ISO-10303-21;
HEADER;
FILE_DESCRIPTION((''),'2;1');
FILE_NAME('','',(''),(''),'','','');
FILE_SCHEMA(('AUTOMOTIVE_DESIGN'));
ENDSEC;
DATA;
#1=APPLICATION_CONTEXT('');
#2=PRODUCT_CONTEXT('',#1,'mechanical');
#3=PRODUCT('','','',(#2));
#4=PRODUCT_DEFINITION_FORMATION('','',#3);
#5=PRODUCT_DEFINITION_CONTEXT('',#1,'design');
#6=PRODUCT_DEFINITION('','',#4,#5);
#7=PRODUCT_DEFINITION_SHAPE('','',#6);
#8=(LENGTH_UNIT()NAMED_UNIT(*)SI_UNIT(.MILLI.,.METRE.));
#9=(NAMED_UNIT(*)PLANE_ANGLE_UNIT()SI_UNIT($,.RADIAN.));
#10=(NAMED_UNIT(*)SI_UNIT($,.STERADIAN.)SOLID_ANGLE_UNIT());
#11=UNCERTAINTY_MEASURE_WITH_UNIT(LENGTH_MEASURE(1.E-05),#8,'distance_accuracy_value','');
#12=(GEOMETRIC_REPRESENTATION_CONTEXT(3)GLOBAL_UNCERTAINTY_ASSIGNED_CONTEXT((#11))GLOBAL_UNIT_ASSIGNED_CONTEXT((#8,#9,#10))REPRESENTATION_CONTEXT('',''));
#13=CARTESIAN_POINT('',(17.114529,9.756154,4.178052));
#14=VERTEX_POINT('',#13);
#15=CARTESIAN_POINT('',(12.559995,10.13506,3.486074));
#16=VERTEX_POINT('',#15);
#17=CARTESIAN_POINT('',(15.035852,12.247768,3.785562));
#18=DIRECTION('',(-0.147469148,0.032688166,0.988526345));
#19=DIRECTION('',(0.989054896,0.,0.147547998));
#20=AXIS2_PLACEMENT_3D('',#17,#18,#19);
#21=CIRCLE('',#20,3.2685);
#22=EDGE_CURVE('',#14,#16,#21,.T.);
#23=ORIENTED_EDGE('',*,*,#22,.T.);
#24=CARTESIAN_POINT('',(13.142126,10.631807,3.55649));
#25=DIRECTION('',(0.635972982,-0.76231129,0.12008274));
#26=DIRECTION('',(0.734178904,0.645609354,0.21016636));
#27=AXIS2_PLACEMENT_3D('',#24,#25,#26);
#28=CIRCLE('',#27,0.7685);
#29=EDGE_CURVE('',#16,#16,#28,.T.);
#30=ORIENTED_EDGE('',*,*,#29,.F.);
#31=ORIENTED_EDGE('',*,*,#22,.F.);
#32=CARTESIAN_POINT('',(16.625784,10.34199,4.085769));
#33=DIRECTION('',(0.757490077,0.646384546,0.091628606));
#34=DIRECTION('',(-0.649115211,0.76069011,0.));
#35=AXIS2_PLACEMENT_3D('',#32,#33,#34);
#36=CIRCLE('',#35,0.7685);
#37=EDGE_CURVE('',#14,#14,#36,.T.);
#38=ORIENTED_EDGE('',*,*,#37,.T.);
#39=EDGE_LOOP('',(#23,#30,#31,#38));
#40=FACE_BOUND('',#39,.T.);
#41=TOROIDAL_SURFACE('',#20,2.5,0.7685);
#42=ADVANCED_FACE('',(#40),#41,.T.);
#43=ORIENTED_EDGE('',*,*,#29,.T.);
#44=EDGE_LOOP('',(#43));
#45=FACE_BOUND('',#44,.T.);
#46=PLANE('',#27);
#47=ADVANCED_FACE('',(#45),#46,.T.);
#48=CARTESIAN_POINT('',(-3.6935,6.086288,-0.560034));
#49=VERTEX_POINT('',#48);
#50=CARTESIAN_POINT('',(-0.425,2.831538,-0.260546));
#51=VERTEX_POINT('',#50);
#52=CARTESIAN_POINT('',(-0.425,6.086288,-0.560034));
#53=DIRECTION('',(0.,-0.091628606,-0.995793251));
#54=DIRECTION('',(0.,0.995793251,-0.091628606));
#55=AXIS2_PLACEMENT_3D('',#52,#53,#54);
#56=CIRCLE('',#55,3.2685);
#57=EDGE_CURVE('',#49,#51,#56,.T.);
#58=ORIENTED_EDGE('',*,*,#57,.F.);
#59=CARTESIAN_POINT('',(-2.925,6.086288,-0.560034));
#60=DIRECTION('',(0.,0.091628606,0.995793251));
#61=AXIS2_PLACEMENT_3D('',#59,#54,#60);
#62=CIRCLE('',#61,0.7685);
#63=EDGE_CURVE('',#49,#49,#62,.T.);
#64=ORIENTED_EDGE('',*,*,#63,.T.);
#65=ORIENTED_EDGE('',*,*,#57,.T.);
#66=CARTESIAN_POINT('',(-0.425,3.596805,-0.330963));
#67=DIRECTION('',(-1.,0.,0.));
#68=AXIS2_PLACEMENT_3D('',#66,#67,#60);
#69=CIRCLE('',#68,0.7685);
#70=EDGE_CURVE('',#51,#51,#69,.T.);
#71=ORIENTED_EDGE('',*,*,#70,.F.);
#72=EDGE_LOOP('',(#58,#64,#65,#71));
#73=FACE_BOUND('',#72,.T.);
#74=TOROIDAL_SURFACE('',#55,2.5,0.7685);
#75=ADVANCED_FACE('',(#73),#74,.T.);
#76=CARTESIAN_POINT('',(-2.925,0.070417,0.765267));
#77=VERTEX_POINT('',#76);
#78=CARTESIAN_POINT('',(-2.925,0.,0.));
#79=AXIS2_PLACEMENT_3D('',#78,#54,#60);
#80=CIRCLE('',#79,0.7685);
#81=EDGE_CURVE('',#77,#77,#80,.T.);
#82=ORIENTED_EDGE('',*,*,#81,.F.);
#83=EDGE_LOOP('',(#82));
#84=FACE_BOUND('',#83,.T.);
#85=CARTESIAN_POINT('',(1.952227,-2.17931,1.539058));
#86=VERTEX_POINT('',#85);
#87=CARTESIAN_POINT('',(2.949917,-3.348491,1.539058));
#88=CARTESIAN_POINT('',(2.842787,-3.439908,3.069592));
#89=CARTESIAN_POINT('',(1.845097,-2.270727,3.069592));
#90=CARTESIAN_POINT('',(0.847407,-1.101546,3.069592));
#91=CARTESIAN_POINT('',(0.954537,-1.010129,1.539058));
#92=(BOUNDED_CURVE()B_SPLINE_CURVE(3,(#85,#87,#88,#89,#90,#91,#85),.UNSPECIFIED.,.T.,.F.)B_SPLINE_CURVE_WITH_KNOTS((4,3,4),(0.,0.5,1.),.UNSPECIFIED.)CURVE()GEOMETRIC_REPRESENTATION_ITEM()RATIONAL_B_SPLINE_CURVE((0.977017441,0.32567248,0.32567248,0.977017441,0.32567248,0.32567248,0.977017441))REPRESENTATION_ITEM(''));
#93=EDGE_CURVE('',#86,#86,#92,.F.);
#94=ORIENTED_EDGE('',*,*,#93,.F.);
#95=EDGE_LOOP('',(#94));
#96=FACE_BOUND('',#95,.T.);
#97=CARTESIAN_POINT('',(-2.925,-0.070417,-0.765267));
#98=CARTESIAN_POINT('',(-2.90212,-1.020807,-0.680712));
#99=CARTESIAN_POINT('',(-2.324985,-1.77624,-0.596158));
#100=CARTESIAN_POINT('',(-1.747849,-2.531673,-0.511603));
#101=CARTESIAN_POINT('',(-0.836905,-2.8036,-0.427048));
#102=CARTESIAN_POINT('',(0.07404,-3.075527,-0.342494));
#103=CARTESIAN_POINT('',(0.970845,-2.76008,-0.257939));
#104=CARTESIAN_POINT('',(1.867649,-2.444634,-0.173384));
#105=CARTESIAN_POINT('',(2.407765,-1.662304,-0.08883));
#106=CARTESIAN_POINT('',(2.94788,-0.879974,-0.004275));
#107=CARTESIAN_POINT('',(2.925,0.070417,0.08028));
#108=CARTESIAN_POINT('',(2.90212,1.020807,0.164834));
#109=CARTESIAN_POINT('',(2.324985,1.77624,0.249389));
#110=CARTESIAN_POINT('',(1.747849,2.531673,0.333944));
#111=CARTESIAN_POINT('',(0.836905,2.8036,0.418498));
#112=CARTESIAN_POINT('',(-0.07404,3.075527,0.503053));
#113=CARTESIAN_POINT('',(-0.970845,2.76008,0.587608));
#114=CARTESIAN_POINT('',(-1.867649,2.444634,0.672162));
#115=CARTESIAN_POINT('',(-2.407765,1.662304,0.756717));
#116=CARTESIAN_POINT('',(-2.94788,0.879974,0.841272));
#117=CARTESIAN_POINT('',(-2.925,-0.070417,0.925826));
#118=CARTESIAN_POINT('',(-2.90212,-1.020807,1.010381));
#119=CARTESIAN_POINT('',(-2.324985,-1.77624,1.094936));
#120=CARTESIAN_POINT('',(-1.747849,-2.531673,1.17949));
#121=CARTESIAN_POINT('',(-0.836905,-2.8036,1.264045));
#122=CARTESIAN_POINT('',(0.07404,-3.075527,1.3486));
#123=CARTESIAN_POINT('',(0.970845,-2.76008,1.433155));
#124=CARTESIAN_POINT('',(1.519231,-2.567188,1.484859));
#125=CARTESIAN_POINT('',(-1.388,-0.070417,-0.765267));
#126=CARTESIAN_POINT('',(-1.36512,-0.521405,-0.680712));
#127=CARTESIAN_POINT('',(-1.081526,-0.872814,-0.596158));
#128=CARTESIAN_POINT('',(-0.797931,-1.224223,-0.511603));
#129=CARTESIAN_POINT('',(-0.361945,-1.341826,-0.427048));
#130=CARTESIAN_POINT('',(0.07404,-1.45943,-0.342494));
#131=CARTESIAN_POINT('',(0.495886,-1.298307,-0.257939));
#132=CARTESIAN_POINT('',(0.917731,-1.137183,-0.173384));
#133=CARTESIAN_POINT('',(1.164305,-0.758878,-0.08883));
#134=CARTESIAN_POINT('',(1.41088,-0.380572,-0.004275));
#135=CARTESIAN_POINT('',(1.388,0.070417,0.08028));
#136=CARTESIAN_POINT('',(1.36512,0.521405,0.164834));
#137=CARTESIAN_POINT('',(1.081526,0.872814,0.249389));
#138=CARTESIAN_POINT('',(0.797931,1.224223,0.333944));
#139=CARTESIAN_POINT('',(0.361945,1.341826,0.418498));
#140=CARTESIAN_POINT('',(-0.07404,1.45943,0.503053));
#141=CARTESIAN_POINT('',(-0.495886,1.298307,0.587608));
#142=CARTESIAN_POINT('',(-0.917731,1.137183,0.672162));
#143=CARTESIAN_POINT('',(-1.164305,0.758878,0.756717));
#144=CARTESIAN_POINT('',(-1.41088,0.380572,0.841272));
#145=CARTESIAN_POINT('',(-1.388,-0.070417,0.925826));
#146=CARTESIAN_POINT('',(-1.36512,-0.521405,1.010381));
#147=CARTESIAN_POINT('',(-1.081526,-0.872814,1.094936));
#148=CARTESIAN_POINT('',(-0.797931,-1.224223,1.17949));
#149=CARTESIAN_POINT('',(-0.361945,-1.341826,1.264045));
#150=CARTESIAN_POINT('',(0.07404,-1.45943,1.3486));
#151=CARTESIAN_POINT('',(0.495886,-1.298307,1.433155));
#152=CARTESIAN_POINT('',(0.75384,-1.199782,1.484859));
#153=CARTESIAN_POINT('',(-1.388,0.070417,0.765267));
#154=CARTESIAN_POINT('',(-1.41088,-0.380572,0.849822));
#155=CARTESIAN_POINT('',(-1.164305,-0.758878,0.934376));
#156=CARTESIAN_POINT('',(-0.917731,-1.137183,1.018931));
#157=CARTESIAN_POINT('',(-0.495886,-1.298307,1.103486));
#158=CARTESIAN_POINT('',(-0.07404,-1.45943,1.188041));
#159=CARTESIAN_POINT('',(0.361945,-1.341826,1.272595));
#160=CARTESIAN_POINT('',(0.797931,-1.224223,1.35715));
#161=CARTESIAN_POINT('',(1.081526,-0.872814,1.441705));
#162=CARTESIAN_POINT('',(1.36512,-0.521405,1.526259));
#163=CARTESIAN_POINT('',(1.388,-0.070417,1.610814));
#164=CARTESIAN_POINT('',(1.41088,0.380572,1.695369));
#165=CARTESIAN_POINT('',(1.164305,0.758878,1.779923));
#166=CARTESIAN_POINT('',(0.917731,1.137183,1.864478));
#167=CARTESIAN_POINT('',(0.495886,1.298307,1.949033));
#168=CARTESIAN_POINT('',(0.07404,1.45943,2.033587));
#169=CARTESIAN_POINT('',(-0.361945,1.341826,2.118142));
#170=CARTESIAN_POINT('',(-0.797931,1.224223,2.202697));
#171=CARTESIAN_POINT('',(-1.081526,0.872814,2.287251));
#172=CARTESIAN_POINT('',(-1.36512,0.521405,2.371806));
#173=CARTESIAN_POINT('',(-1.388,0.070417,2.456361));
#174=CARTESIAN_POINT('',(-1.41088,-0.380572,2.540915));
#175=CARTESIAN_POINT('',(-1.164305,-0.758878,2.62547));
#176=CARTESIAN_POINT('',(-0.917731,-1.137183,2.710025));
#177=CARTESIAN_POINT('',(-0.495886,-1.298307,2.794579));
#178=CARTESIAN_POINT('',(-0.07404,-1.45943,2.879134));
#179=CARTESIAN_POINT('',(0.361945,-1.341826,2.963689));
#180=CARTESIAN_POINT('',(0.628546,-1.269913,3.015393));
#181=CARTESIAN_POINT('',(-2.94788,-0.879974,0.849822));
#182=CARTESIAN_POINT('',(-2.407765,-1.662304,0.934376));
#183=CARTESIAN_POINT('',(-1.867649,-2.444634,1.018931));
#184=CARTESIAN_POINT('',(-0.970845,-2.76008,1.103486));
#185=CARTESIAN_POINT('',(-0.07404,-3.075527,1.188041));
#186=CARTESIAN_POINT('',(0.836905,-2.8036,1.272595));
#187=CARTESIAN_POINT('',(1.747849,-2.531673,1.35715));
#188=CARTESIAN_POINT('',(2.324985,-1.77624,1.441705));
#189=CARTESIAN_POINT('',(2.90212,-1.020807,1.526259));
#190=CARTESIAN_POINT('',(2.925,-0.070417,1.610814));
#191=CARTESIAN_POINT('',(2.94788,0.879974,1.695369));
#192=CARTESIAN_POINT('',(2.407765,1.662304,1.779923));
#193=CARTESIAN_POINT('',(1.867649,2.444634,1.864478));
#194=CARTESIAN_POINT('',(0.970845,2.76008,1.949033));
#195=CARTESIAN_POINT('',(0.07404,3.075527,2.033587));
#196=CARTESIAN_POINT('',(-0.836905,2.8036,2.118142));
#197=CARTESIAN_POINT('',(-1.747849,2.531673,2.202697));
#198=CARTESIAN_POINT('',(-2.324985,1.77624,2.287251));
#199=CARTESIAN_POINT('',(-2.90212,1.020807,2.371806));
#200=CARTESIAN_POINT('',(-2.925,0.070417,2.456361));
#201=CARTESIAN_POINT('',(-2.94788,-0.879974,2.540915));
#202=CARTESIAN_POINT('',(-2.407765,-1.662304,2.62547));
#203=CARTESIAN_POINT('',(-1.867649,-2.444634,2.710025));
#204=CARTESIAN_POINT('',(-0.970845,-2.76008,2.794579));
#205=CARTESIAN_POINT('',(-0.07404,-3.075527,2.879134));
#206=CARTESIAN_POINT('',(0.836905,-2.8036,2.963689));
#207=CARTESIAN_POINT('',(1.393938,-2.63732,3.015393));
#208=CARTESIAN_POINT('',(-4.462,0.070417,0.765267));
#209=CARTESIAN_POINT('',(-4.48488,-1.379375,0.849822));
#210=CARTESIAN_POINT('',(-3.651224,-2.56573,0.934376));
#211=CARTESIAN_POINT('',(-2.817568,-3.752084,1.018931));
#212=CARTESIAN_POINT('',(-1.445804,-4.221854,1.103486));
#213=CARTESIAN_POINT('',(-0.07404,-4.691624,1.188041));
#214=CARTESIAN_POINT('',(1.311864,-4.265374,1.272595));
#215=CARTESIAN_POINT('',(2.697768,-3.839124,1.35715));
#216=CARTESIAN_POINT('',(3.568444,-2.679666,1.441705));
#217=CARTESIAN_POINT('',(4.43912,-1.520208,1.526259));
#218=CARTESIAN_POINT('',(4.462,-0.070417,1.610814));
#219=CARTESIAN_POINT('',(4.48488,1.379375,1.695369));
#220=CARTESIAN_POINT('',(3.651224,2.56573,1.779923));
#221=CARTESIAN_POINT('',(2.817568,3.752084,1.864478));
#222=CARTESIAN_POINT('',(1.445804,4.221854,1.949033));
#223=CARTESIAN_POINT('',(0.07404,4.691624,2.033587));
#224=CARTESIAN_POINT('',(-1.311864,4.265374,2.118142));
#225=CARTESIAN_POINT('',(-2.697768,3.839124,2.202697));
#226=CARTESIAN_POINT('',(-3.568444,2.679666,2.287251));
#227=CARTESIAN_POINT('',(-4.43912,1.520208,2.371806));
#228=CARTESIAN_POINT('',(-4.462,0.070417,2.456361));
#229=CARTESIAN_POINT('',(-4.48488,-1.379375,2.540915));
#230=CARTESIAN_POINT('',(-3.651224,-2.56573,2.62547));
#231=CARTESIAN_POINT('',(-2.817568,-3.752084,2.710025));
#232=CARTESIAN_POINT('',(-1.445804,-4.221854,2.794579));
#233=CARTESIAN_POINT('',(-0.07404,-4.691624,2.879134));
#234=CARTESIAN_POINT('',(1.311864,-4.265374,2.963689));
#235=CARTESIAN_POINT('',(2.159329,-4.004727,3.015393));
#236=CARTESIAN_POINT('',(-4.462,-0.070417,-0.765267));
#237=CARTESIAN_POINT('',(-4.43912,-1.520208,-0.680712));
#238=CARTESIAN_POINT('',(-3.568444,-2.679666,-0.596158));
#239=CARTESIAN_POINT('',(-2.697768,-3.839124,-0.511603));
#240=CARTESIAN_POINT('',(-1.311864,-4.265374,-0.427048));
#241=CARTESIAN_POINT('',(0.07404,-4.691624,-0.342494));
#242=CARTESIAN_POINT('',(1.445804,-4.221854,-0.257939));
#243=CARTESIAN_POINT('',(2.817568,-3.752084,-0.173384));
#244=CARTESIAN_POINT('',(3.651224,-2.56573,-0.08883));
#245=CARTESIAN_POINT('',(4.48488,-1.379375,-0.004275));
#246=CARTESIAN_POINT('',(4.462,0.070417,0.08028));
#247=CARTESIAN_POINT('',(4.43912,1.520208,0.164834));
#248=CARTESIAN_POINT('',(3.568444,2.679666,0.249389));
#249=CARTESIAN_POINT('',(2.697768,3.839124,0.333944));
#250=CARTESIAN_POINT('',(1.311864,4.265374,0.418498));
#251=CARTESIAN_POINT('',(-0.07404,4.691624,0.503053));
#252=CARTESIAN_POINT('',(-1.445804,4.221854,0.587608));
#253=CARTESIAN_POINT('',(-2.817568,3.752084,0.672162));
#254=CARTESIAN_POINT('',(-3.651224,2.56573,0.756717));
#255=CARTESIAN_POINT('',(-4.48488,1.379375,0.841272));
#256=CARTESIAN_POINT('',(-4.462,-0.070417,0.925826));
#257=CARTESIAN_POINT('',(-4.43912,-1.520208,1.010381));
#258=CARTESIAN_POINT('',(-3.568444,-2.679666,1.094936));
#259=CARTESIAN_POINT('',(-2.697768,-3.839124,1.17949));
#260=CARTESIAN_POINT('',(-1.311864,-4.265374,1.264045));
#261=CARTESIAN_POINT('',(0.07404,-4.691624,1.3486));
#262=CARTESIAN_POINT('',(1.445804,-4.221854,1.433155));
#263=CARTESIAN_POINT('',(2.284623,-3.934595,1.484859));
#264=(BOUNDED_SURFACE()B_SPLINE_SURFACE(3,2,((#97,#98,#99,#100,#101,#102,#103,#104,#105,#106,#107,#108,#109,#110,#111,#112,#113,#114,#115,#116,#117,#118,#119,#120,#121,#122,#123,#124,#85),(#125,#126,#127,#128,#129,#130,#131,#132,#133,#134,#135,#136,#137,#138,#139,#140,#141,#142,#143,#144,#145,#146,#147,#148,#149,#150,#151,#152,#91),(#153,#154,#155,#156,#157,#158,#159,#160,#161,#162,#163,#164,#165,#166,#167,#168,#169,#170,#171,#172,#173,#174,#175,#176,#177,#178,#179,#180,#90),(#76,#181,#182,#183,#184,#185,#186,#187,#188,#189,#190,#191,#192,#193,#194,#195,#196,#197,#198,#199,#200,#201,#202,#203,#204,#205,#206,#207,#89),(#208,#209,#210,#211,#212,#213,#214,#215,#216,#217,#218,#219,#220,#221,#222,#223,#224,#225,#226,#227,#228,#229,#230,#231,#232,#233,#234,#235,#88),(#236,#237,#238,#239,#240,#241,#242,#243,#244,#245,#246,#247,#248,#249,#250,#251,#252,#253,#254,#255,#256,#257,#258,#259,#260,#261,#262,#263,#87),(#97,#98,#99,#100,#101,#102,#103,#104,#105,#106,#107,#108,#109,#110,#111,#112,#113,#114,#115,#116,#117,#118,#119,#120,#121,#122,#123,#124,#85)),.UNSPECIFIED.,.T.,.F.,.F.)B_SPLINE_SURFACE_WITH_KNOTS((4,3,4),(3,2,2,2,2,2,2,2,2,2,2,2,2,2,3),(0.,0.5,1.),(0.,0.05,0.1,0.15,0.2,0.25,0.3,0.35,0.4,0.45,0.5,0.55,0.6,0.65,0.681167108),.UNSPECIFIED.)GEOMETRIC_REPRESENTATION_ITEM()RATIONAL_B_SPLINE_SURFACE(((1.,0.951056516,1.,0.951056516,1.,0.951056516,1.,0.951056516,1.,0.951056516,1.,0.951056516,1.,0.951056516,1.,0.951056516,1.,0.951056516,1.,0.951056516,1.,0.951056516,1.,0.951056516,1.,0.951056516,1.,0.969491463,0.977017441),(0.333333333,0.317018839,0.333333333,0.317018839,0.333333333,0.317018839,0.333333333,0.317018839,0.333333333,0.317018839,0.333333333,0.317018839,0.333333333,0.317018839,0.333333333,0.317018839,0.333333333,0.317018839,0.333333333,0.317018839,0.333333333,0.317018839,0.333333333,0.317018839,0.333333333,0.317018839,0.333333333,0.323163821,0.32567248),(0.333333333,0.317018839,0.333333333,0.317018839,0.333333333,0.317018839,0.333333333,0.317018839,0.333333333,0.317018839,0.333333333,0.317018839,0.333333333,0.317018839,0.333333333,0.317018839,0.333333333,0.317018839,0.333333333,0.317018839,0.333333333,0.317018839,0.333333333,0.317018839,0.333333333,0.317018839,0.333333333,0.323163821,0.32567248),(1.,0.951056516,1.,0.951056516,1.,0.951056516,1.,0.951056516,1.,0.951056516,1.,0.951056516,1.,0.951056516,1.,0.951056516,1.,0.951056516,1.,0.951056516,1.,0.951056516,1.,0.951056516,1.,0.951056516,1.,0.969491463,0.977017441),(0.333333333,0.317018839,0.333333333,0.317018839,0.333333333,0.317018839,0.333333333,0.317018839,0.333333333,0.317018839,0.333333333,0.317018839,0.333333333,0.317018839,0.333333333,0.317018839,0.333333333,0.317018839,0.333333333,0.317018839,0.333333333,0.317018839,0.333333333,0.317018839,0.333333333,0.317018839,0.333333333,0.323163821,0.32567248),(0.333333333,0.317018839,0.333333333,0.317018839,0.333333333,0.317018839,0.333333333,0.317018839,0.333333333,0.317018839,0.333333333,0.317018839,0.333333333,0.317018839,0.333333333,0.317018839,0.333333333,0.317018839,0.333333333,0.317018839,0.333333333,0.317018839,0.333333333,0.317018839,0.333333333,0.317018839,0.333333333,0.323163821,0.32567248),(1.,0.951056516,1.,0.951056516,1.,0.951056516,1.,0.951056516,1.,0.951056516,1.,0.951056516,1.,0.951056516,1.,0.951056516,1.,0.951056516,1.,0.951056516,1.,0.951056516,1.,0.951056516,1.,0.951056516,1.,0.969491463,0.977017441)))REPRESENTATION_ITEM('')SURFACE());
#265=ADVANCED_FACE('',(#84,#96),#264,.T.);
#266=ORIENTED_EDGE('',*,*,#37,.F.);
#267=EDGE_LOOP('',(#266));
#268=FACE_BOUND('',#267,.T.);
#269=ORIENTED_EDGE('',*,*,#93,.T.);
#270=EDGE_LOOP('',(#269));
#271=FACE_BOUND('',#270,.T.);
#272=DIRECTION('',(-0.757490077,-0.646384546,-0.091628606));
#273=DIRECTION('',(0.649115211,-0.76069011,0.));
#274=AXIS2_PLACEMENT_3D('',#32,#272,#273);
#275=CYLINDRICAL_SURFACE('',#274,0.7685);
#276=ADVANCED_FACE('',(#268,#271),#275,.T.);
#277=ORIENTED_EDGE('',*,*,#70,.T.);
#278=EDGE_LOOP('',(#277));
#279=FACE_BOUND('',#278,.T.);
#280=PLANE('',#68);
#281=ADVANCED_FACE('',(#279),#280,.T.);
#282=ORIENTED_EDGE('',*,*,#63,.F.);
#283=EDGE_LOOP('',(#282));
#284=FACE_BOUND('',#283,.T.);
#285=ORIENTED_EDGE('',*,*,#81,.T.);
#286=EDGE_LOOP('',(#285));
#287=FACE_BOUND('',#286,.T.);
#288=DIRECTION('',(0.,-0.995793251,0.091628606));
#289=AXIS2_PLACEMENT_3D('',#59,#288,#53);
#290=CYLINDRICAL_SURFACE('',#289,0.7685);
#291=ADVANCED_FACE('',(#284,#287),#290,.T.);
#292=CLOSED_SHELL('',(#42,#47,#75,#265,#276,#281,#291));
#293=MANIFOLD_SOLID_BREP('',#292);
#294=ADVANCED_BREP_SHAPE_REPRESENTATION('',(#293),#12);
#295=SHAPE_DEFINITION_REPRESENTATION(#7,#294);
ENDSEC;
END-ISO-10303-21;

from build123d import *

# Parameters (mm, degrees)
SWEEP1_PITCH        = 1.691093574
SWEEP1_HEIGHT       = 2.304
SWEEP1_RADIUS       = 2.925
SWEEP1_START_ANGLE  = -180
SWEEP1_PROFILE_R    = 0.7685
SKETCH7_R           = 0.7685
BOSS_EXTRUDE1_DEPTH = 6.112
SKETCH8_R           = 0.7685
BOSS_EXTRUDE2_DEPTH = 19.442
SKETCH11_R          = 0.7685
SKETCH13_R          = 0.7685


with BuildPart() as part:
    # Sweep1: sweep along a helix
    with BuildLine() as sweep1_path:
        add(Helix(SWEEP1_PITCH, SWEEP1_HEIGHT, SWEEP1_RADIUS, center=(0, 0, 0), direction=(0, 0, 1), mode=Mode.PRIVATE).rotate(Axis((0, 0, 0), (0, 0, 1)), SWEEP1_START_ANGLE))
    # Sweep1 profile (on start of the path) → Sweep1 (sweep)
    with BuildSketch(Plane(origin=(-2.925, 0, 0), x_dir=(0, -0.0916286058923694, -0.9957932509222087), z_dir=(5.37769585920008e-15, -0.9957932509222087, 0.0916286058923694))):
        Circle(SWEEP1_PROFILE_R)
    sweep(path=sweep1_path.line, is_frenet=True)

    # Sketch7 → Boss-Extrude1 (add)
    with BuildSketch(Plane(origin=(0, 0, 0), x_dir=(1, 0, 0), z_dir=(-6.564467280906748e-15, 0.9957932509222046, -0.09162860589241555))):
        with Locations(Location((-2.925, 0, 0), (0, 0, 90))):
            Circle(SKETCH7_R)
    extrude(amount=BOSS_EXTRUDE1_DEPTH)


with BuildPart() as boss_extrude2_tool:
    # Sketch8 → Boss-Extrude2 (new body)
    with BuildSketch(Plane(origin=(0.159938056, 0.136479, 0.019346658), x_dir=(0.1474691482501653, -0.03268816646451709, -0.9885263446603529), z_dir=(0.7574900772095401, 0.6463845461575468, 0.09162860589241553))):
        with Locations(Location((-1.925160413, -3.180364199, 0), (0, 0, 6.926156226))):
            Circle(SKETCH8_R)
    extrude(amount=BOSS_EXTRUDE2_DEPTH)


with BuildPart() as part_1:
    add(part.part)


with BuildPart() as part_2:
    # Boss-Extrude2: joined with boss_extrude2_tool
    add(part_1.part.fuse(boss_extrude2_tool.part, tol=0.00001))

    # Sweep2: sweep along a path in Sketch10
    with BuildLine(Plane(origin=(0, 0, 0), x_dir=(1, 0, 0), z_dir=(0, 0.09162860589241555, 0.9957932509222045))) as sweep2_path:
        ThreePointArc((-2.925, 6.112), (1.342766953, 7.879766953), (-0.425, 3.612))
    # Sketch11 → Sweep2 (sweep)
    with BuildSketch(Plane(origin=(0, 6.08628835, -0.560034039), x_dir=(1, 0, 0), z_dir=(-6.5644672809067495e-15, 0.9957932509222046, -0.09162860589241555))):
        with Locations((-2.925, 0)):
            Circle(SKETCH11_R)
    sweep(path=sweep2_path.line)

    # Sweep3: sweep along a path in Sketch12
    with BuildLine(Plane(origin=(-0.283901766, 0.062929964, 1.903071786), x_dir=(-0.9890657559861645, -0.0035253546206446794, -0.14743304314269404), z_dir=(0.14746914825016533, -0.03268816646451704, -0.988526344660353))) as sweep3_path:
        ThreePointArc((-17.08283018, 10.224364256), (-15.686568725, 14.627691261), (-13.560252283, 10.526762933))
    # Sketch13 → Sweep3 (sweep)
    with BuildSketch(Plane(origin=(14.887060137, 12.703487346, 1.800790013), x_dir=(0.14746914825016522, -0.032688166464517, -0.988526344660353), z_dir=(0.75749007720954, 0.6463845461575467, 0.09162860589241552))):
        with Locations((-1.925160413, -3.180364199)):
            Circle(SKETCH13_R)
    sweep(path=sweep3_path.line)


solid = part_2.part
